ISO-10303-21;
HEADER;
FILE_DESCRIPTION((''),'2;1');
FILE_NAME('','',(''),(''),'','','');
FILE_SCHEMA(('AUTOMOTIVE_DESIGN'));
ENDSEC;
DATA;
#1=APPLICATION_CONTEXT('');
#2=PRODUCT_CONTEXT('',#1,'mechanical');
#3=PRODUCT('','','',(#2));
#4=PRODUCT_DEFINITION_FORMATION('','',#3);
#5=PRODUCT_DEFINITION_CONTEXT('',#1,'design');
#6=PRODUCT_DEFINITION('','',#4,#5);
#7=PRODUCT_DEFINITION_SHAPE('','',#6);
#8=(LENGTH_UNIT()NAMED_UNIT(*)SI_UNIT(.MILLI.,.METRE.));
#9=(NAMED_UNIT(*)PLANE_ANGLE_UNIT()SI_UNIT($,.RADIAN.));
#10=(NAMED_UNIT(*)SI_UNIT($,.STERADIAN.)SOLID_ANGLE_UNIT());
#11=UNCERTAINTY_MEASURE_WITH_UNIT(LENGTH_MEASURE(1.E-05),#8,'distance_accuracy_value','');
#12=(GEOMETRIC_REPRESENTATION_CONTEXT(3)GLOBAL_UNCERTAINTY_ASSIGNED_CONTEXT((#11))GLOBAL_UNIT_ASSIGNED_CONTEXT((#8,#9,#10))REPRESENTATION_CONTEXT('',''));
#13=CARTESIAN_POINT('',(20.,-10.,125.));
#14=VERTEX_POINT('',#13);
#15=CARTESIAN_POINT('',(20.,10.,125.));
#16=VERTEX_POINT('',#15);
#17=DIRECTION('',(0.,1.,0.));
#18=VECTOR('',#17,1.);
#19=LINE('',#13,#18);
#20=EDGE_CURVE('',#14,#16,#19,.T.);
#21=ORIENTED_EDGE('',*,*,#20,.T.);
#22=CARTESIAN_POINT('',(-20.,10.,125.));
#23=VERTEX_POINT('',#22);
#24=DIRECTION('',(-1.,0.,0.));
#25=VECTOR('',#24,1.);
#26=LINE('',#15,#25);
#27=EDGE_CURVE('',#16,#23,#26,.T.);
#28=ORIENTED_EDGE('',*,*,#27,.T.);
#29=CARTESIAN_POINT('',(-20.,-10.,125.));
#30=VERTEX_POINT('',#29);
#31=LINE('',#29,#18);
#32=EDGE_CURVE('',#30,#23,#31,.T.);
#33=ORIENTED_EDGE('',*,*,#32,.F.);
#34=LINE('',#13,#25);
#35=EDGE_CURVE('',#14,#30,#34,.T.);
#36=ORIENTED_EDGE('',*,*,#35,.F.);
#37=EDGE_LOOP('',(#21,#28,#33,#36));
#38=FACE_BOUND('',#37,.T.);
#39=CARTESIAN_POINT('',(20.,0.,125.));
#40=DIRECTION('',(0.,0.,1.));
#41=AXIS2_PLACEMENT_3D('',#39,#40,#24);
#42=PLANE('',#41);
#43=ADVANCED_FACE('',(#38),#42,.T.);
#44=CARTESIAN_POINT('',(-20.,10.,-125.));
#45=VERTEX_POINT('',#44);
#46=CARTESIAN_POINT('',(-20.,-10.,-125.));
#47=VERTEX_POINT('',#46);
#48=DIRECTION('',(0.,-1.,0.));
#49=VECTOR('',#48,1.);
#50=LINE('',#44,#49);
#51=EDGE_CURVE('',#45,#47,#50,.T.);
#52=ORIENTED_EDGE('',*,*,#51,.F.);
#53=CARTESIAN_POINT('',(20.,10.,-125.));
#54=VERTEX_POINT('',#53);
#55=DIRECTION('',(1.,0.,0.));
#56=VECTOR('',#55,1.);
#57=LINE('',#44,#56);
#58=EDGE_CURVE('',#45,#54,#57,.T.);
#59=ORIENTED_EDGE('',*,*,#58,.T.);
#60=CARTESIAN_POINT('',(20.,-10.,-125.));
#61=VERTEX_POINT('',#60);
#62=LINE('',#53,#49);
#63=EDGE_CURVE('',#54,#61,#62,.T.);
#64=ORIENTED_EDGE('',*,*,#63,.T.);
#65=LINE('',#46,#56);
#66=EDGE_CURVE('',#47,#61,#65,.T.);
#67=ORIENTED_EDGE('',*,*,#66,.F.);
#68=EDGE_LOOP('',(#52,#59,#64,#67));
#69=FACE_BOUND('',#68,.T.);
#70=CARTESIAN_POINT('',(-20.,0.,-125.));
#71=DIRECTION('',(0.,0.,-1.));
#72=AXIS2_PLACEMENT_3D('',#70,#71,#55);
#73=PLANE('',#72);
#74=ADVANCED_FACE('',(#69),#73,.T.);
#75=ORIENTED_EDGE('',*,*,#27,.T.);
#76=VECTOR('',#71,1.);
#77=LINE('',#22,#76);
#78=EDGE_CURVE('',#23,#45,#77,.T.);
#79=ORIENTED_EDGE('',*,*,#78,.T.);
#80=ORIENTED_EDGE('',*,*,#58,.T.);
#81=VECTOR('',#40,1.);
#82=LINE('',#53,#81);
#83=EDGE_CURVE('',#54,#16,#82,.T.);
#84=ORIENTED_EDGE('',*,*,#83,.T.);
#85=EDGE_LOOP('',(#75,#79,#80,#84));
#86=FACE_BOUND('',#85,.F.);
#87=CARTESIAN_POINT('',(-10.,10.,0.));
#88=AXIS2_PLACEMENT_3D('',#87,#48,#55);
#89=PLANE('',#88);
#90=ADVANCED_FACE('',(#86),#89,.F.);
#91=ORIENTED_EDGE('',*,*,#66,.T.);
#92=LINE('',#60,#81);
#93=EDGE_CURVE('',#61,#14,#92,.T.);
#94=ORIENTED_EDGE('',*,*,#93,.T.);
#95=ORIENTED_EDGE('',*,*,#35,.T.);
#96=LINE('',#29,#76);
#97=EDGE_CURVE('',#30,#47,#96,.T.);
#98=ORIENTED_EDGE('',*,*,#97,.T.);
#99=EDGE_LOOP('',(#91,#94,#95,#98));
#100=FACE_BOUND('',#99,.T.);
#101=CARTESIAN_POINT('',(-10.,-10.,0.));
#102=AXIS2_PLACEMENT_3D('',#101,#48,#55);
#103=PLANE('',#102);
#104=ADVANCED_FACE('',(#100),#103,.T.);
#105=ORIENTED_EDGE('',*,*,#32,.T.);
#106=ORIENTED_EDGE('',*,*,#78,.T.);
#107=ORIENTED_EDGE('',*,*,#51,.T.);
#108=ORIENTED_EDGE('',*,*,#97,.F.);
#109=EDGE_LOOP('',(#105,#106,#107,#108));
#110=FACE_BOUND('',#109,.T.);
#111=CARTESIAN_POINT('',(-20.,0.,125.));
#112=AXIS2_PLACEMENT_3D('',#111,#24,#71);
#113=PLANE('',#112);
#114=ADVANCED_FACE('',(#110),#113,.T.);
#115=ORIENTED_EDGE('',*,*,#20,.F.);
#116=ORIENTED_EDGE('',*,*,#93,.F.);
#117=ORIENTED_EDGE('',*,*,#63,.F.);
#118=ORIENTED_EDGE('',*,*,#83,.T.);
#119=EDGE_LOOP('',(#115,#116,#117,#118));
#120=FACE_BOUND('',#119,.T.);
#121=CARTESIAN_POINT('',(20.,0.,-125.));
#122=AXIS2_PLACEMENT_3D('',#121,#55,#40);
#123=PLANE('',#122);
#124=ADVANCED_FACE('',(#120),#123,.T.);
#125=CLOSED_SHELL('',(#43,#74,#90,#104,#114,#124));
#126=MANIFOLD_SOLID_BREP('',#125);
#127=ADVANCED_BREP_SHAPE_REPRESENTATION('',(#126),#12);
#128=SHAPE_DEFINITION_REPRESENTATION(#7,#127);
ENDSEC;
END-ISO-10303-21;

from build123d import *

# Parameters (mm, degrees)
F1_DEPTH = 10


# Not quite as in the source:
# - the program builds the solid bodies; features that only make, move or delete a surface that nothing else refers to are left out


with BuildPart() as f1:
    # F0 (on Front) → F1 (new body, symmetric)
    with BuildSketch(Plane.XZ):
        Polygon((0, -125), (0, 0), (0, 125), (-20, 125), (-20, -125), align=None)
        Polygon((0, 125), (0, 0), (0, -125), (20, -125), (20, 125), align=None)
    extrude(amount=F1_DEPTH, both=True)


solid = f1.part
